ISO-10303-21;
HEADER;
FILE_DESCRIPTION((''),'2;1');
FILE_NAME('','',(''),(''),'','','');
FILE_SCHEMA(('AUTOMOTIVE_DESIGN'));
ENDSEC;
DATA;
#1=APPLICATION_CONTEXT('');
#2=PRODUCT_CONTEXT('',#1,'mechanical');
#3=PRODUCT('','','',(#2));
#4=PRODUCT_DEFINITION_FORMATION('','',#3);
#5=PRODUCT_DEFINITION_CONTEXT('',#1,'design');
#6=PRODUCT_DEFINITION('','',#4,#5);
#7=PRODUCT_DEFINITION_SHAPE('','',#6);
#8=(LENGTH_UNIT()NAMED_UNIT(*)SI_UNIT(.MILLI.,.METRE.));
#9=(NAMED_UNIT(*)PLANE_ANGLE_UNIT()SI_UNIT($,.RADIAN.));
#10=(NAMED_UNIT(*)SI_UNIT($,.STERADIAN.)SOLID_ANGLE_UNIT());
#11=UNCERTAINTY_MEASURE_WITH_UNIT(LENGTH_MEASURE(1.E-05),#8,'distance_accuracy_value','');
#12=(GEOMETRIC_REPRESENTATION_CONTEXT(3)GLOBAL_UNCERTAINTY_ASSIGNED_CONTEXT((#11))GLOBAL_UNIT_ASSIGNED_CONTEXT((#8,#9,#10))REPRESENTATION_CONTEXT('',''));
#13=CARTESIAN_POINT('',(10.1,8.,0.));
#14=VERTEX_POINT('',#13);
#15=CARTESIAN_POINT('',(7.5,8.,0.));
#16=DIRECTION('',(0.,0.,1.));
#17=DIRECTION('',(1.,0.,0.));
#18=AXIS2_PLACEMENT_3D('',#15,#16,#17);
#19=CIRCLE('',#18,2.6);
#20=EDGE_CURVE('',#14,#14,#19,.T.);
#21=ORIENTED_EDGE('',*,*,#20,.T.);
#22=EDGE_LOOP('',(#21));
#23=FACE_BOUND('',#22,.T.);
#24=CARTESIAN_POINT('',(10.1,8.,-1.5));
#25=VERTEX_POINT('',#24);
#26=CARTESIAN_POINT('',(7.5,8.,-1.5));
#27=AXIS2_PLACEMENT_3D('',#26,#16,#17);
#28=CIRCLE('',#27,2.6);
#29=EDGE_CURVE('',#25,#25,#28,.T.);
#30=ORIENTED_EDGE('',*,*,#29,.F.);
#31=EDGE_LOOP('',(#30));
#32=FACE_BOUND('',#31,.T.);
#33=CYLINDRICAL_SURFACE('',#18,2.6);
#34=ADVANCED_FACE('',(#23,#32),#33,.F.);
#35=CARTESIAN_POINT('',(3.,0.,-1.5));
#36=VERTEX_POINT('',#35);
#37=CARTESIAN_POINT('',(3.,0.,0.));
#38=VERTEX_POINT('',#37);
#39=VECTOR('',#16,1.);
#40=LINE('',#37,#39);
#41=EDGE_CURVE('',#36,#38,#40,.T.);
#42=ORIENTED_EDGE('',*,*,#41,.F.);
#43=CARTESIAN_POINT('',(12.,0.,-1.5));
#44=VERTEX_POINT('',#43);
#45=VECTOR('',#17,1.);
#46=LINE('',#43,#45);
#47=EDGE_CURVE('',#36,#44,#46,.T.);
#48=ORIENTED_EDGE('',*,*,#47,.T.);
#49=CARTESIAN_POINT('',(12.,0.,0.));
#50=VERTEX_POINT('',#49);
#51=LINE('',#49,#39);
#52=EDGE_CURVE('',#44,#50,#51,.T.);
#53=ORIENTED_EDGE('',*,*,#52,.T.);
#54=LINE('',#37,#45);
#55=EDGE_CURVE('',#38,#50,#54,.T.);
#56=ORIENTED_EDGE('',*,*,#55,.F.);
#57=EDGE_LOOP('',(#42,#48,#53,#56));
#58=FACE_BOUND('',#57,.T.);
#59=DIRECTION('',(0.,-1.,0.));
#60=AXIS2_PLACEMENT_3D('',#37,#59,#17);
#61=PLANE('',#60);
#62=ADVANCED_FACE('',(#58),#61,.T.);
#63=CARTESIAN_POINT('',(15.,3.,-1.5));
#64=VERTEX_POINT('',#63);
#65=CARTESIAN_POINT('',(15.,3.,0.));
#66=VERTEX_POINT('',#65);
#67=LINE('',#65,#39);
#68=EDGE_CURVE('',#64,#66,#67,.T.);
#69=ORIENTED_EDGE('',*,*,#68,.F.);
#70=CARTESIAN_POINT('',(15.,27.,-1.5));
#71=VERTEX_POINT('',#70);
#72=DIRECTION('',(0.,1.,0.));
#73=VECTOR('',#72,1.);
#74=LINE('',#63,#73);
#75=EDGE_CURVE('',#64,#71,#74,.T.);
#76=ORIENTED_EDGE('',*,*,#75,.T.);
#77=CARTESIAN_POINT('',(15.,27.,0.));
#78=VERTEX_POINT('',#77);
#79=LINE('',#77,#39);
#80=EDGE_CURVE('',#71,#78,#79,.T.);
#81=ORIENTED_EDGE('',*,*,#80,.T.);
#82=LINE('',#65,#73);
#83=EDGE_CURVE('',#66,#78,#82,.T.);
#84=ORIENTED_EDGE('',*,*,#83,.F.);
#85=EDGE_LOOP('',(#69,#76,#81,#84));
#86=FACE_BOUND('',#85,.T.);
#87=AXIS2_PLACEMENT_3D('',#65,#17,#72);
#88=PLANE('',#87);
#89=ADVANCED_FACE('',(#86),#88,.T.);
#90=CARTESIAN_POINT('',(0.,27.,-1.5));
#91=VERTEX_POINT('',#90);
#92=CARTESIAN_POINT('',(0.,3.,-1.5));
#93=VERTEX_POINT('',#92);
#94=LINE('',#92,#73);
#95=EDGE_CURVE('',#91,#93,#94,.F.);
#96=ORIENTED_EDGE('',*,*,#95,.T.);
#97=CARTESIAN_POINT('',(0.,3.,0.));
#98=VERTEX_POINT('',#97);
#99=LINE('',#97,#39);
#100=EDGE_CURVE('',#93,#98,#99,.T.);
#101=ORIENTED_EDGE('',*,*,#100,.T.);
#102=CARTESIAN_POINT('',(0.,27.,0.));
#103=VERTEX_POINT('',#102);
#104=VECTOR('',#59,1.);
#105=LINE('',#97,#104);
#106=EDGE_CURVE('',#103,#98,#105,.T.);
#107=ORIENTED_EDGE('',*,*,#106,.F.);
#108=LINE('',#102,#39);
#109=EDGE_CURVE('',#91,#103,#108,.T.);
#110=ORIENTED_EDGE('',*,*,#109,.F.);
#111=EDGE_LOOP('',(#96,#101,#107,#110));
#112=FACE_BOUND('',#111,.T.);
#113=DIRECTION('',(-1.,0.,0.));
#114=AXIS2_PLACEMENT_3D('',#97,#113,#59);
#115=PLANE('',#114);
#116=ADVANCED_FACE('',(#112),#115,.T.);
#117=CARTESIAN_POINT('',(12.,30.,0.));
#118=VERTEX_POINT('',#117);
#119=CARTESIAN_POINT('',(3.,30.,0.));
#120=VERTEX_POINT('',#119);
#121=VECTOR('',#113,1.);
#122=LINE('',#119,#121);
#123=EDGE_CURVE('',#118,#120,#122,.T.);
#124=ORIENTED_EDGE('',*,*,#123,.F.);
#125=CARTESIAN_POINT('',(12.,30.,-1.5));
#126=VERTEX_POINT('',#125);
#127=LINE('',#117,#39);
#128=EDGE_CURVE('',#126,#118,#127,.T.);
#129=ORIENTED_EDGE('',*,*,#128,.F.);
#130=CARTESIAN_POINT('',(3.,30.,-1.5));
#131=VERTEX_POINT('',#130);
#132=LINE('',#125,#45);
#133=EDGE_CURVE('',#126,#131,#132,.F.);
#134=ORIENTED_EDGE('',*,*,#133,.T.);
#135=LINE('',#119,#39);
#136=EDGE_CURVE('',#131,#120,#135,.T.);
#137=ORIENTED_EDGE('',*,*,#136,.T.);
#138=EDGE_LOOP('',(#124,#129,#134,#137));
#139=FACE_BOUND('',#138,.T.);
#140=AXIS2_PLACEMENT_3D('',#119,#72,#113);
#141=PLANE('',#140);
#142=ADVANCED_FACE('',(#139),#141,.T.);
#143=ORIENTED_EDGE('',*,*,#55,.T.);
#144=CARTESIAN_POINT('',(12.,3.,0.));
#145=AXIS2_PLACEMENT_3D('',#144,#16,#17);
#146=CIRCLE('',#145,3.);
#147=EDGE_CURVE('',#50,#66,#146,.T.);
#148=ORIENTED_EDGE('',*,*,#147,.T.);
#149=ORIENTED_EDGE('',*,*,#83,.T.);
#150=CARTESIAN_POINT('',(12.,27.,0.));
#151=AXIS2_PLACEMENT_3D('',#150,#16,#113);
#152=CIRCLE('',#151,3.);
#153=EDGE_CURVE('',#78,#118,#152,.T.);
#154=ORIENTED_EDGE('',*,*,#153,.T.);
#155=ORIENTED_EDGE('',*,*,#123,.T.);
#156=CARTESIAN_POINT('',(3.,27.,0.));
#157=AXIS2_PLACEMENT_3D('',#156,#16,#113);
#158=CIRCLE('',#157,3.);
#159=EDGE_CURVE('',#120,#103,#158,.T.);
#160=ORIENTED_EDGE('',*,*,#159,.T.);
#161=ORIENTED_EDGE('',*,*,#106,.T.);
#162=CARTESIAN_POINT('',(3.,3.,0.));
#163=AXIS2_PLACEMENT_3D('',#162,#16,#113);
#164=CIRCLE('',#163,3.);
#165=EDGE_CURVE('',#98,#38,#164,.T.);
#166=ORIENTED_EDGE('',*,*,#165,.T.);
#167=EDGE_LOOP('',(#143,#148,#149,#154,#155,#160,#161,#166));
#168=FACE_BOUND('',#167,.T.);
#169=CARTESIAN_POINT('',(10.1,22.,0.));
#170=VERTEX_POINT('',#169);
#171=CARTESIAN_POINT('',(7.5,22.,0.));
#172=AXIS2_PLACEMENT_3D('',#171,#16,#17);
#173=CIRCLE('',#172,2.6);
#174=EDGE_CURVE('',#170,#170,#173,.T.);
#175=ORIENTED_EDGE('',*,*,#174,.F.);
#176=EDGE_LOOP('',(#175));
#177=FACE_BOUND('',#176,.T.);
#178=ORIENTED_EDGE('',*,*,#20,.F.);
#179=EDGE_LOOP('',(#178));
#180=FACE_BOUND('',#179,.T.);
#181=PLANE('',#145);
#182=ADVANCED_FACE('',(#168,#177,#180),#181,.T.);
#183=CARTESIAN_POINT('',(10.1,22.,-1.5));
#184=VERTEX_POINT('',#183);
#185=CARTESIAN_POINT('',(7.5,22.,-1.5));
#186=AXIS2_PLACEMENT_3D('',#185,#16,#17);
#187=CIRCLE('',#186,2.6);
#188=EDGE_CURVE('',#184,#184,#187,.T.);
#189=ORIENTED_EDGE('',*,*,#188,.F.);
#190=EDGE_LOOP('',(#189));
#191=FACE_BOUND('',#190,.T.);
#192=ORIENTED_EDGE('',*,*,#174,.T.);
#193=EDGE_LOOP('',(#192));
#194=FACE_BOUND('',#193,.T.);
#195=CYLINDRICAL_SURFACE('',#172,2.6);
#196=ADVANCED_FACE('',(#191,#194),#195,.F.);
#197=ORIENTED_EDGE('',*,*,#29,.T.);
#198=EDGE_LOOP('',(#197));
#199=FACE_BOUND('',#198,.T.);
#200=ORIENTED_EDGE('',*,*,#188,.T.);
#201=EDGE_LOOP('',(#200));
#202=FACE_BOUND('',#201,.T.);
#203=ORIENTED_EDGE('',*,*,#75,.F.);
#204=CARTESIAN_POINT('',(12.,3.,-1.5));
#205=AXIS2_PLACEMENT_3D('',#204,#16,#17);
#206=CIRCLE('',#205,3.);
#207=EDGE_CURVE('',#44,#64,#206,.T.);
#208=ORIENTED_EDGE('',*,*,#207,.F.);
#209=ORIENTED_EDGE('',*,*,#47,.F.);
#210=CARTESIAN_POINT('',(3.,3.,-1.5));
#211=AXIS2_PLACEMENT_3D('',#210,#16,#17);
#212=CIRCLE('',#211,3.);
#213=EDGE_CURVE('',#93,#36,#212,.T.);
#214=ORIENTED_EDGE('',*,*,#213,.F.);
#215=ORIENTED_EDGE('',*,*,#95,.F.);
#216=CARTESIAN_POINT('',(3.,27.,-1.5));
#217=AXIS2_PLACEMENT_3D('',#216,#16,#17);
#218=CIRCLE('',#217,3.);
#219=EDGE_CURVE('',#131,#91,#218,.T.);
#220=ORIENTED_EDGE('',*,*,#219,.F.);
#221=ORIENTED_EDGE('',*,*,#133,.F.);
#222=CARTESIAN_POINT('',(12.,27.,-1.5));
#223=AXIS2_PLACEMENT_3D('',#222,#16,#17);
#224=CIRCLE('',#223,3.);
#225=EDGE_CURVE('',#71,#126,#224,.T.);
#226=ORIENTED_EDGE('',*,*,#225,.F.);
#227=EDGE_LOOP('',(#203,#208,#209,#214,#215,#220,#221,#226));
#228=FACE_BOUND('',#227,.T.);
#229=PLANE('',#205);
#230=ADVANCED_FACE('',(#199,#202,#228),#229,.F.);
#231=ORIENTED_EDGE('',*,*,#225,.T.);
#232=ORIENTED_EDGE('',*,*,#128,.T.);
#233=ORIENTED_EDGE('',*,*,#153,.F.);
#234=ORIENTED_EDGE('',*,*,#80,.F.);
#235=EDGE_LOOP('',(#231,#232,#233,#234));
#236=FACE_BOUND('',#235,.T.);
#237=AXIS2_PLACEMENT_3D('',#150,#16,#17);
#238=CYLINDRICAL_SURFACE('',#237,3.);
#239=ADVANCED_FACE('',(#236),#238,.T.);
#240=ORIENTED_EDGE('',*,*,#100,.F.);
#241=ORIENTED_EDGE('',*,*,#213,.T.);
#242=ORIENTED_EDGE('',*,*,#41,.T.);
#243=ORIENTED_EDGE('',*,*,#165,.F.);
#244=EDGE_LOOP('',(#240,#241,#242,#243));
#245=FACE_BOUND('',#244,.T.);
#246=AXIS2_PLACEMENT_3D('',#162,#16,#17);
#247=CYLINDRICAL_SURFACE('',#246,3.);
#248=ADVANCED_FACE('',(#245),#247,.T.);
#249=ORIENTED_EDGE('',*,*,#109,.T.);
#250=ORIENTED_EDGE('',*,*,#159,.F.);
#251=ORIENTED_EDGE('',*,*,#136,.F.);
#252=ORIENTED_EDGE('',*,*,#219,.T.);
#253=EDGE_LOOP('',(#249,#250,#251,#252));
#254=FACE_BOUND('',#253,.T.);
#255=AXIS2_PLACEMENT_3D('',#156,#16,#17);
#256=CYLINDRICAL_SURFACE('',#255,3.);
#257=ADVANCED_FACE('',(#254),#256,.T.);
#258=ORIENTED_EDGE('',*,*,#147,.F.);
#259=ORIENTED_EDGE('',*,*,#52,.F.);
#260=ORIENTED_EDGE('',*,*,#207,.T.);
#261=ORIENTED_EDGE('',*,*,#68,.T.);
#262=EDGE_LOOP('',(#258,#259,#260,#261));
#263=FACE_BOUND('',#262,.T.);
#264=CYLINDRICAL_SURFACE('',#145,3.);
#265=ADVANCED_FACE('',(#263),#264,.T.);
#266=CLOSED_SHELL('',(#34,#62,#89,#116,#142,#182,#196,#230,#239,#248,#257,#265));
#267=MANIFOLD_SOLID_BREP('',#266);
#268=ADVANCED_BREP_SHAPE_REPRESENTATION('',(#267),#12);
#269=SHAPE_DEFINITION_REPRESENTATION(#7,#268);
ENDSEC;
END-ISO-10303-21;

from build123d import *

# Parameters (mm, degrees)
CONVERT_SOLID1_START     = -1.5
CONVERT_SOLID1_OUTLINE_R = 2.6
CONVERT_SOLID1_DEPTH     = 1.5


# Read off the part's stored shape, not the designer's step: Convert-Solid1
with BuildPart() as part:
    # Convert-Solid1 outline → Convert-Solid1 (new body)
    with BuildSketch(Plane.XY.offset(CONVERT_SOLID1_START)):
        with BuildLine():
            Line((15, 3), (15, 27))
            ThreePointArc((15, 27), (14.121320344, 29.121320344), (12, 30))
            Line((12, 30), (3, 30))
            ThreePointArc((3, 30), (0.878679656, 29.121320344), (0, 27))
            Line((0, 27), (0, 3))
            ThreePointArc((0, 3), (0.878679656, 0.878679656), (3, 0))
            Line((3, 0), (12, 0))
            ThreePointArc((12, 0), (14.121320344, 0.878679656), (15, 3))
        make_face()
        with Locations((7.5, 8)):
            Circle(CONVERT_SOLID1_OUTLINE_R, mode=Mode.SUBTRACT)
        with Locations((7.5, 22)):
            Circle(CONVERT_SOLID1_OUTLINE_R, mode=Mode.SUBTRACT)
    extrude(amount=CONVERT_SOLID1_DEPTH)


solid = part.part
